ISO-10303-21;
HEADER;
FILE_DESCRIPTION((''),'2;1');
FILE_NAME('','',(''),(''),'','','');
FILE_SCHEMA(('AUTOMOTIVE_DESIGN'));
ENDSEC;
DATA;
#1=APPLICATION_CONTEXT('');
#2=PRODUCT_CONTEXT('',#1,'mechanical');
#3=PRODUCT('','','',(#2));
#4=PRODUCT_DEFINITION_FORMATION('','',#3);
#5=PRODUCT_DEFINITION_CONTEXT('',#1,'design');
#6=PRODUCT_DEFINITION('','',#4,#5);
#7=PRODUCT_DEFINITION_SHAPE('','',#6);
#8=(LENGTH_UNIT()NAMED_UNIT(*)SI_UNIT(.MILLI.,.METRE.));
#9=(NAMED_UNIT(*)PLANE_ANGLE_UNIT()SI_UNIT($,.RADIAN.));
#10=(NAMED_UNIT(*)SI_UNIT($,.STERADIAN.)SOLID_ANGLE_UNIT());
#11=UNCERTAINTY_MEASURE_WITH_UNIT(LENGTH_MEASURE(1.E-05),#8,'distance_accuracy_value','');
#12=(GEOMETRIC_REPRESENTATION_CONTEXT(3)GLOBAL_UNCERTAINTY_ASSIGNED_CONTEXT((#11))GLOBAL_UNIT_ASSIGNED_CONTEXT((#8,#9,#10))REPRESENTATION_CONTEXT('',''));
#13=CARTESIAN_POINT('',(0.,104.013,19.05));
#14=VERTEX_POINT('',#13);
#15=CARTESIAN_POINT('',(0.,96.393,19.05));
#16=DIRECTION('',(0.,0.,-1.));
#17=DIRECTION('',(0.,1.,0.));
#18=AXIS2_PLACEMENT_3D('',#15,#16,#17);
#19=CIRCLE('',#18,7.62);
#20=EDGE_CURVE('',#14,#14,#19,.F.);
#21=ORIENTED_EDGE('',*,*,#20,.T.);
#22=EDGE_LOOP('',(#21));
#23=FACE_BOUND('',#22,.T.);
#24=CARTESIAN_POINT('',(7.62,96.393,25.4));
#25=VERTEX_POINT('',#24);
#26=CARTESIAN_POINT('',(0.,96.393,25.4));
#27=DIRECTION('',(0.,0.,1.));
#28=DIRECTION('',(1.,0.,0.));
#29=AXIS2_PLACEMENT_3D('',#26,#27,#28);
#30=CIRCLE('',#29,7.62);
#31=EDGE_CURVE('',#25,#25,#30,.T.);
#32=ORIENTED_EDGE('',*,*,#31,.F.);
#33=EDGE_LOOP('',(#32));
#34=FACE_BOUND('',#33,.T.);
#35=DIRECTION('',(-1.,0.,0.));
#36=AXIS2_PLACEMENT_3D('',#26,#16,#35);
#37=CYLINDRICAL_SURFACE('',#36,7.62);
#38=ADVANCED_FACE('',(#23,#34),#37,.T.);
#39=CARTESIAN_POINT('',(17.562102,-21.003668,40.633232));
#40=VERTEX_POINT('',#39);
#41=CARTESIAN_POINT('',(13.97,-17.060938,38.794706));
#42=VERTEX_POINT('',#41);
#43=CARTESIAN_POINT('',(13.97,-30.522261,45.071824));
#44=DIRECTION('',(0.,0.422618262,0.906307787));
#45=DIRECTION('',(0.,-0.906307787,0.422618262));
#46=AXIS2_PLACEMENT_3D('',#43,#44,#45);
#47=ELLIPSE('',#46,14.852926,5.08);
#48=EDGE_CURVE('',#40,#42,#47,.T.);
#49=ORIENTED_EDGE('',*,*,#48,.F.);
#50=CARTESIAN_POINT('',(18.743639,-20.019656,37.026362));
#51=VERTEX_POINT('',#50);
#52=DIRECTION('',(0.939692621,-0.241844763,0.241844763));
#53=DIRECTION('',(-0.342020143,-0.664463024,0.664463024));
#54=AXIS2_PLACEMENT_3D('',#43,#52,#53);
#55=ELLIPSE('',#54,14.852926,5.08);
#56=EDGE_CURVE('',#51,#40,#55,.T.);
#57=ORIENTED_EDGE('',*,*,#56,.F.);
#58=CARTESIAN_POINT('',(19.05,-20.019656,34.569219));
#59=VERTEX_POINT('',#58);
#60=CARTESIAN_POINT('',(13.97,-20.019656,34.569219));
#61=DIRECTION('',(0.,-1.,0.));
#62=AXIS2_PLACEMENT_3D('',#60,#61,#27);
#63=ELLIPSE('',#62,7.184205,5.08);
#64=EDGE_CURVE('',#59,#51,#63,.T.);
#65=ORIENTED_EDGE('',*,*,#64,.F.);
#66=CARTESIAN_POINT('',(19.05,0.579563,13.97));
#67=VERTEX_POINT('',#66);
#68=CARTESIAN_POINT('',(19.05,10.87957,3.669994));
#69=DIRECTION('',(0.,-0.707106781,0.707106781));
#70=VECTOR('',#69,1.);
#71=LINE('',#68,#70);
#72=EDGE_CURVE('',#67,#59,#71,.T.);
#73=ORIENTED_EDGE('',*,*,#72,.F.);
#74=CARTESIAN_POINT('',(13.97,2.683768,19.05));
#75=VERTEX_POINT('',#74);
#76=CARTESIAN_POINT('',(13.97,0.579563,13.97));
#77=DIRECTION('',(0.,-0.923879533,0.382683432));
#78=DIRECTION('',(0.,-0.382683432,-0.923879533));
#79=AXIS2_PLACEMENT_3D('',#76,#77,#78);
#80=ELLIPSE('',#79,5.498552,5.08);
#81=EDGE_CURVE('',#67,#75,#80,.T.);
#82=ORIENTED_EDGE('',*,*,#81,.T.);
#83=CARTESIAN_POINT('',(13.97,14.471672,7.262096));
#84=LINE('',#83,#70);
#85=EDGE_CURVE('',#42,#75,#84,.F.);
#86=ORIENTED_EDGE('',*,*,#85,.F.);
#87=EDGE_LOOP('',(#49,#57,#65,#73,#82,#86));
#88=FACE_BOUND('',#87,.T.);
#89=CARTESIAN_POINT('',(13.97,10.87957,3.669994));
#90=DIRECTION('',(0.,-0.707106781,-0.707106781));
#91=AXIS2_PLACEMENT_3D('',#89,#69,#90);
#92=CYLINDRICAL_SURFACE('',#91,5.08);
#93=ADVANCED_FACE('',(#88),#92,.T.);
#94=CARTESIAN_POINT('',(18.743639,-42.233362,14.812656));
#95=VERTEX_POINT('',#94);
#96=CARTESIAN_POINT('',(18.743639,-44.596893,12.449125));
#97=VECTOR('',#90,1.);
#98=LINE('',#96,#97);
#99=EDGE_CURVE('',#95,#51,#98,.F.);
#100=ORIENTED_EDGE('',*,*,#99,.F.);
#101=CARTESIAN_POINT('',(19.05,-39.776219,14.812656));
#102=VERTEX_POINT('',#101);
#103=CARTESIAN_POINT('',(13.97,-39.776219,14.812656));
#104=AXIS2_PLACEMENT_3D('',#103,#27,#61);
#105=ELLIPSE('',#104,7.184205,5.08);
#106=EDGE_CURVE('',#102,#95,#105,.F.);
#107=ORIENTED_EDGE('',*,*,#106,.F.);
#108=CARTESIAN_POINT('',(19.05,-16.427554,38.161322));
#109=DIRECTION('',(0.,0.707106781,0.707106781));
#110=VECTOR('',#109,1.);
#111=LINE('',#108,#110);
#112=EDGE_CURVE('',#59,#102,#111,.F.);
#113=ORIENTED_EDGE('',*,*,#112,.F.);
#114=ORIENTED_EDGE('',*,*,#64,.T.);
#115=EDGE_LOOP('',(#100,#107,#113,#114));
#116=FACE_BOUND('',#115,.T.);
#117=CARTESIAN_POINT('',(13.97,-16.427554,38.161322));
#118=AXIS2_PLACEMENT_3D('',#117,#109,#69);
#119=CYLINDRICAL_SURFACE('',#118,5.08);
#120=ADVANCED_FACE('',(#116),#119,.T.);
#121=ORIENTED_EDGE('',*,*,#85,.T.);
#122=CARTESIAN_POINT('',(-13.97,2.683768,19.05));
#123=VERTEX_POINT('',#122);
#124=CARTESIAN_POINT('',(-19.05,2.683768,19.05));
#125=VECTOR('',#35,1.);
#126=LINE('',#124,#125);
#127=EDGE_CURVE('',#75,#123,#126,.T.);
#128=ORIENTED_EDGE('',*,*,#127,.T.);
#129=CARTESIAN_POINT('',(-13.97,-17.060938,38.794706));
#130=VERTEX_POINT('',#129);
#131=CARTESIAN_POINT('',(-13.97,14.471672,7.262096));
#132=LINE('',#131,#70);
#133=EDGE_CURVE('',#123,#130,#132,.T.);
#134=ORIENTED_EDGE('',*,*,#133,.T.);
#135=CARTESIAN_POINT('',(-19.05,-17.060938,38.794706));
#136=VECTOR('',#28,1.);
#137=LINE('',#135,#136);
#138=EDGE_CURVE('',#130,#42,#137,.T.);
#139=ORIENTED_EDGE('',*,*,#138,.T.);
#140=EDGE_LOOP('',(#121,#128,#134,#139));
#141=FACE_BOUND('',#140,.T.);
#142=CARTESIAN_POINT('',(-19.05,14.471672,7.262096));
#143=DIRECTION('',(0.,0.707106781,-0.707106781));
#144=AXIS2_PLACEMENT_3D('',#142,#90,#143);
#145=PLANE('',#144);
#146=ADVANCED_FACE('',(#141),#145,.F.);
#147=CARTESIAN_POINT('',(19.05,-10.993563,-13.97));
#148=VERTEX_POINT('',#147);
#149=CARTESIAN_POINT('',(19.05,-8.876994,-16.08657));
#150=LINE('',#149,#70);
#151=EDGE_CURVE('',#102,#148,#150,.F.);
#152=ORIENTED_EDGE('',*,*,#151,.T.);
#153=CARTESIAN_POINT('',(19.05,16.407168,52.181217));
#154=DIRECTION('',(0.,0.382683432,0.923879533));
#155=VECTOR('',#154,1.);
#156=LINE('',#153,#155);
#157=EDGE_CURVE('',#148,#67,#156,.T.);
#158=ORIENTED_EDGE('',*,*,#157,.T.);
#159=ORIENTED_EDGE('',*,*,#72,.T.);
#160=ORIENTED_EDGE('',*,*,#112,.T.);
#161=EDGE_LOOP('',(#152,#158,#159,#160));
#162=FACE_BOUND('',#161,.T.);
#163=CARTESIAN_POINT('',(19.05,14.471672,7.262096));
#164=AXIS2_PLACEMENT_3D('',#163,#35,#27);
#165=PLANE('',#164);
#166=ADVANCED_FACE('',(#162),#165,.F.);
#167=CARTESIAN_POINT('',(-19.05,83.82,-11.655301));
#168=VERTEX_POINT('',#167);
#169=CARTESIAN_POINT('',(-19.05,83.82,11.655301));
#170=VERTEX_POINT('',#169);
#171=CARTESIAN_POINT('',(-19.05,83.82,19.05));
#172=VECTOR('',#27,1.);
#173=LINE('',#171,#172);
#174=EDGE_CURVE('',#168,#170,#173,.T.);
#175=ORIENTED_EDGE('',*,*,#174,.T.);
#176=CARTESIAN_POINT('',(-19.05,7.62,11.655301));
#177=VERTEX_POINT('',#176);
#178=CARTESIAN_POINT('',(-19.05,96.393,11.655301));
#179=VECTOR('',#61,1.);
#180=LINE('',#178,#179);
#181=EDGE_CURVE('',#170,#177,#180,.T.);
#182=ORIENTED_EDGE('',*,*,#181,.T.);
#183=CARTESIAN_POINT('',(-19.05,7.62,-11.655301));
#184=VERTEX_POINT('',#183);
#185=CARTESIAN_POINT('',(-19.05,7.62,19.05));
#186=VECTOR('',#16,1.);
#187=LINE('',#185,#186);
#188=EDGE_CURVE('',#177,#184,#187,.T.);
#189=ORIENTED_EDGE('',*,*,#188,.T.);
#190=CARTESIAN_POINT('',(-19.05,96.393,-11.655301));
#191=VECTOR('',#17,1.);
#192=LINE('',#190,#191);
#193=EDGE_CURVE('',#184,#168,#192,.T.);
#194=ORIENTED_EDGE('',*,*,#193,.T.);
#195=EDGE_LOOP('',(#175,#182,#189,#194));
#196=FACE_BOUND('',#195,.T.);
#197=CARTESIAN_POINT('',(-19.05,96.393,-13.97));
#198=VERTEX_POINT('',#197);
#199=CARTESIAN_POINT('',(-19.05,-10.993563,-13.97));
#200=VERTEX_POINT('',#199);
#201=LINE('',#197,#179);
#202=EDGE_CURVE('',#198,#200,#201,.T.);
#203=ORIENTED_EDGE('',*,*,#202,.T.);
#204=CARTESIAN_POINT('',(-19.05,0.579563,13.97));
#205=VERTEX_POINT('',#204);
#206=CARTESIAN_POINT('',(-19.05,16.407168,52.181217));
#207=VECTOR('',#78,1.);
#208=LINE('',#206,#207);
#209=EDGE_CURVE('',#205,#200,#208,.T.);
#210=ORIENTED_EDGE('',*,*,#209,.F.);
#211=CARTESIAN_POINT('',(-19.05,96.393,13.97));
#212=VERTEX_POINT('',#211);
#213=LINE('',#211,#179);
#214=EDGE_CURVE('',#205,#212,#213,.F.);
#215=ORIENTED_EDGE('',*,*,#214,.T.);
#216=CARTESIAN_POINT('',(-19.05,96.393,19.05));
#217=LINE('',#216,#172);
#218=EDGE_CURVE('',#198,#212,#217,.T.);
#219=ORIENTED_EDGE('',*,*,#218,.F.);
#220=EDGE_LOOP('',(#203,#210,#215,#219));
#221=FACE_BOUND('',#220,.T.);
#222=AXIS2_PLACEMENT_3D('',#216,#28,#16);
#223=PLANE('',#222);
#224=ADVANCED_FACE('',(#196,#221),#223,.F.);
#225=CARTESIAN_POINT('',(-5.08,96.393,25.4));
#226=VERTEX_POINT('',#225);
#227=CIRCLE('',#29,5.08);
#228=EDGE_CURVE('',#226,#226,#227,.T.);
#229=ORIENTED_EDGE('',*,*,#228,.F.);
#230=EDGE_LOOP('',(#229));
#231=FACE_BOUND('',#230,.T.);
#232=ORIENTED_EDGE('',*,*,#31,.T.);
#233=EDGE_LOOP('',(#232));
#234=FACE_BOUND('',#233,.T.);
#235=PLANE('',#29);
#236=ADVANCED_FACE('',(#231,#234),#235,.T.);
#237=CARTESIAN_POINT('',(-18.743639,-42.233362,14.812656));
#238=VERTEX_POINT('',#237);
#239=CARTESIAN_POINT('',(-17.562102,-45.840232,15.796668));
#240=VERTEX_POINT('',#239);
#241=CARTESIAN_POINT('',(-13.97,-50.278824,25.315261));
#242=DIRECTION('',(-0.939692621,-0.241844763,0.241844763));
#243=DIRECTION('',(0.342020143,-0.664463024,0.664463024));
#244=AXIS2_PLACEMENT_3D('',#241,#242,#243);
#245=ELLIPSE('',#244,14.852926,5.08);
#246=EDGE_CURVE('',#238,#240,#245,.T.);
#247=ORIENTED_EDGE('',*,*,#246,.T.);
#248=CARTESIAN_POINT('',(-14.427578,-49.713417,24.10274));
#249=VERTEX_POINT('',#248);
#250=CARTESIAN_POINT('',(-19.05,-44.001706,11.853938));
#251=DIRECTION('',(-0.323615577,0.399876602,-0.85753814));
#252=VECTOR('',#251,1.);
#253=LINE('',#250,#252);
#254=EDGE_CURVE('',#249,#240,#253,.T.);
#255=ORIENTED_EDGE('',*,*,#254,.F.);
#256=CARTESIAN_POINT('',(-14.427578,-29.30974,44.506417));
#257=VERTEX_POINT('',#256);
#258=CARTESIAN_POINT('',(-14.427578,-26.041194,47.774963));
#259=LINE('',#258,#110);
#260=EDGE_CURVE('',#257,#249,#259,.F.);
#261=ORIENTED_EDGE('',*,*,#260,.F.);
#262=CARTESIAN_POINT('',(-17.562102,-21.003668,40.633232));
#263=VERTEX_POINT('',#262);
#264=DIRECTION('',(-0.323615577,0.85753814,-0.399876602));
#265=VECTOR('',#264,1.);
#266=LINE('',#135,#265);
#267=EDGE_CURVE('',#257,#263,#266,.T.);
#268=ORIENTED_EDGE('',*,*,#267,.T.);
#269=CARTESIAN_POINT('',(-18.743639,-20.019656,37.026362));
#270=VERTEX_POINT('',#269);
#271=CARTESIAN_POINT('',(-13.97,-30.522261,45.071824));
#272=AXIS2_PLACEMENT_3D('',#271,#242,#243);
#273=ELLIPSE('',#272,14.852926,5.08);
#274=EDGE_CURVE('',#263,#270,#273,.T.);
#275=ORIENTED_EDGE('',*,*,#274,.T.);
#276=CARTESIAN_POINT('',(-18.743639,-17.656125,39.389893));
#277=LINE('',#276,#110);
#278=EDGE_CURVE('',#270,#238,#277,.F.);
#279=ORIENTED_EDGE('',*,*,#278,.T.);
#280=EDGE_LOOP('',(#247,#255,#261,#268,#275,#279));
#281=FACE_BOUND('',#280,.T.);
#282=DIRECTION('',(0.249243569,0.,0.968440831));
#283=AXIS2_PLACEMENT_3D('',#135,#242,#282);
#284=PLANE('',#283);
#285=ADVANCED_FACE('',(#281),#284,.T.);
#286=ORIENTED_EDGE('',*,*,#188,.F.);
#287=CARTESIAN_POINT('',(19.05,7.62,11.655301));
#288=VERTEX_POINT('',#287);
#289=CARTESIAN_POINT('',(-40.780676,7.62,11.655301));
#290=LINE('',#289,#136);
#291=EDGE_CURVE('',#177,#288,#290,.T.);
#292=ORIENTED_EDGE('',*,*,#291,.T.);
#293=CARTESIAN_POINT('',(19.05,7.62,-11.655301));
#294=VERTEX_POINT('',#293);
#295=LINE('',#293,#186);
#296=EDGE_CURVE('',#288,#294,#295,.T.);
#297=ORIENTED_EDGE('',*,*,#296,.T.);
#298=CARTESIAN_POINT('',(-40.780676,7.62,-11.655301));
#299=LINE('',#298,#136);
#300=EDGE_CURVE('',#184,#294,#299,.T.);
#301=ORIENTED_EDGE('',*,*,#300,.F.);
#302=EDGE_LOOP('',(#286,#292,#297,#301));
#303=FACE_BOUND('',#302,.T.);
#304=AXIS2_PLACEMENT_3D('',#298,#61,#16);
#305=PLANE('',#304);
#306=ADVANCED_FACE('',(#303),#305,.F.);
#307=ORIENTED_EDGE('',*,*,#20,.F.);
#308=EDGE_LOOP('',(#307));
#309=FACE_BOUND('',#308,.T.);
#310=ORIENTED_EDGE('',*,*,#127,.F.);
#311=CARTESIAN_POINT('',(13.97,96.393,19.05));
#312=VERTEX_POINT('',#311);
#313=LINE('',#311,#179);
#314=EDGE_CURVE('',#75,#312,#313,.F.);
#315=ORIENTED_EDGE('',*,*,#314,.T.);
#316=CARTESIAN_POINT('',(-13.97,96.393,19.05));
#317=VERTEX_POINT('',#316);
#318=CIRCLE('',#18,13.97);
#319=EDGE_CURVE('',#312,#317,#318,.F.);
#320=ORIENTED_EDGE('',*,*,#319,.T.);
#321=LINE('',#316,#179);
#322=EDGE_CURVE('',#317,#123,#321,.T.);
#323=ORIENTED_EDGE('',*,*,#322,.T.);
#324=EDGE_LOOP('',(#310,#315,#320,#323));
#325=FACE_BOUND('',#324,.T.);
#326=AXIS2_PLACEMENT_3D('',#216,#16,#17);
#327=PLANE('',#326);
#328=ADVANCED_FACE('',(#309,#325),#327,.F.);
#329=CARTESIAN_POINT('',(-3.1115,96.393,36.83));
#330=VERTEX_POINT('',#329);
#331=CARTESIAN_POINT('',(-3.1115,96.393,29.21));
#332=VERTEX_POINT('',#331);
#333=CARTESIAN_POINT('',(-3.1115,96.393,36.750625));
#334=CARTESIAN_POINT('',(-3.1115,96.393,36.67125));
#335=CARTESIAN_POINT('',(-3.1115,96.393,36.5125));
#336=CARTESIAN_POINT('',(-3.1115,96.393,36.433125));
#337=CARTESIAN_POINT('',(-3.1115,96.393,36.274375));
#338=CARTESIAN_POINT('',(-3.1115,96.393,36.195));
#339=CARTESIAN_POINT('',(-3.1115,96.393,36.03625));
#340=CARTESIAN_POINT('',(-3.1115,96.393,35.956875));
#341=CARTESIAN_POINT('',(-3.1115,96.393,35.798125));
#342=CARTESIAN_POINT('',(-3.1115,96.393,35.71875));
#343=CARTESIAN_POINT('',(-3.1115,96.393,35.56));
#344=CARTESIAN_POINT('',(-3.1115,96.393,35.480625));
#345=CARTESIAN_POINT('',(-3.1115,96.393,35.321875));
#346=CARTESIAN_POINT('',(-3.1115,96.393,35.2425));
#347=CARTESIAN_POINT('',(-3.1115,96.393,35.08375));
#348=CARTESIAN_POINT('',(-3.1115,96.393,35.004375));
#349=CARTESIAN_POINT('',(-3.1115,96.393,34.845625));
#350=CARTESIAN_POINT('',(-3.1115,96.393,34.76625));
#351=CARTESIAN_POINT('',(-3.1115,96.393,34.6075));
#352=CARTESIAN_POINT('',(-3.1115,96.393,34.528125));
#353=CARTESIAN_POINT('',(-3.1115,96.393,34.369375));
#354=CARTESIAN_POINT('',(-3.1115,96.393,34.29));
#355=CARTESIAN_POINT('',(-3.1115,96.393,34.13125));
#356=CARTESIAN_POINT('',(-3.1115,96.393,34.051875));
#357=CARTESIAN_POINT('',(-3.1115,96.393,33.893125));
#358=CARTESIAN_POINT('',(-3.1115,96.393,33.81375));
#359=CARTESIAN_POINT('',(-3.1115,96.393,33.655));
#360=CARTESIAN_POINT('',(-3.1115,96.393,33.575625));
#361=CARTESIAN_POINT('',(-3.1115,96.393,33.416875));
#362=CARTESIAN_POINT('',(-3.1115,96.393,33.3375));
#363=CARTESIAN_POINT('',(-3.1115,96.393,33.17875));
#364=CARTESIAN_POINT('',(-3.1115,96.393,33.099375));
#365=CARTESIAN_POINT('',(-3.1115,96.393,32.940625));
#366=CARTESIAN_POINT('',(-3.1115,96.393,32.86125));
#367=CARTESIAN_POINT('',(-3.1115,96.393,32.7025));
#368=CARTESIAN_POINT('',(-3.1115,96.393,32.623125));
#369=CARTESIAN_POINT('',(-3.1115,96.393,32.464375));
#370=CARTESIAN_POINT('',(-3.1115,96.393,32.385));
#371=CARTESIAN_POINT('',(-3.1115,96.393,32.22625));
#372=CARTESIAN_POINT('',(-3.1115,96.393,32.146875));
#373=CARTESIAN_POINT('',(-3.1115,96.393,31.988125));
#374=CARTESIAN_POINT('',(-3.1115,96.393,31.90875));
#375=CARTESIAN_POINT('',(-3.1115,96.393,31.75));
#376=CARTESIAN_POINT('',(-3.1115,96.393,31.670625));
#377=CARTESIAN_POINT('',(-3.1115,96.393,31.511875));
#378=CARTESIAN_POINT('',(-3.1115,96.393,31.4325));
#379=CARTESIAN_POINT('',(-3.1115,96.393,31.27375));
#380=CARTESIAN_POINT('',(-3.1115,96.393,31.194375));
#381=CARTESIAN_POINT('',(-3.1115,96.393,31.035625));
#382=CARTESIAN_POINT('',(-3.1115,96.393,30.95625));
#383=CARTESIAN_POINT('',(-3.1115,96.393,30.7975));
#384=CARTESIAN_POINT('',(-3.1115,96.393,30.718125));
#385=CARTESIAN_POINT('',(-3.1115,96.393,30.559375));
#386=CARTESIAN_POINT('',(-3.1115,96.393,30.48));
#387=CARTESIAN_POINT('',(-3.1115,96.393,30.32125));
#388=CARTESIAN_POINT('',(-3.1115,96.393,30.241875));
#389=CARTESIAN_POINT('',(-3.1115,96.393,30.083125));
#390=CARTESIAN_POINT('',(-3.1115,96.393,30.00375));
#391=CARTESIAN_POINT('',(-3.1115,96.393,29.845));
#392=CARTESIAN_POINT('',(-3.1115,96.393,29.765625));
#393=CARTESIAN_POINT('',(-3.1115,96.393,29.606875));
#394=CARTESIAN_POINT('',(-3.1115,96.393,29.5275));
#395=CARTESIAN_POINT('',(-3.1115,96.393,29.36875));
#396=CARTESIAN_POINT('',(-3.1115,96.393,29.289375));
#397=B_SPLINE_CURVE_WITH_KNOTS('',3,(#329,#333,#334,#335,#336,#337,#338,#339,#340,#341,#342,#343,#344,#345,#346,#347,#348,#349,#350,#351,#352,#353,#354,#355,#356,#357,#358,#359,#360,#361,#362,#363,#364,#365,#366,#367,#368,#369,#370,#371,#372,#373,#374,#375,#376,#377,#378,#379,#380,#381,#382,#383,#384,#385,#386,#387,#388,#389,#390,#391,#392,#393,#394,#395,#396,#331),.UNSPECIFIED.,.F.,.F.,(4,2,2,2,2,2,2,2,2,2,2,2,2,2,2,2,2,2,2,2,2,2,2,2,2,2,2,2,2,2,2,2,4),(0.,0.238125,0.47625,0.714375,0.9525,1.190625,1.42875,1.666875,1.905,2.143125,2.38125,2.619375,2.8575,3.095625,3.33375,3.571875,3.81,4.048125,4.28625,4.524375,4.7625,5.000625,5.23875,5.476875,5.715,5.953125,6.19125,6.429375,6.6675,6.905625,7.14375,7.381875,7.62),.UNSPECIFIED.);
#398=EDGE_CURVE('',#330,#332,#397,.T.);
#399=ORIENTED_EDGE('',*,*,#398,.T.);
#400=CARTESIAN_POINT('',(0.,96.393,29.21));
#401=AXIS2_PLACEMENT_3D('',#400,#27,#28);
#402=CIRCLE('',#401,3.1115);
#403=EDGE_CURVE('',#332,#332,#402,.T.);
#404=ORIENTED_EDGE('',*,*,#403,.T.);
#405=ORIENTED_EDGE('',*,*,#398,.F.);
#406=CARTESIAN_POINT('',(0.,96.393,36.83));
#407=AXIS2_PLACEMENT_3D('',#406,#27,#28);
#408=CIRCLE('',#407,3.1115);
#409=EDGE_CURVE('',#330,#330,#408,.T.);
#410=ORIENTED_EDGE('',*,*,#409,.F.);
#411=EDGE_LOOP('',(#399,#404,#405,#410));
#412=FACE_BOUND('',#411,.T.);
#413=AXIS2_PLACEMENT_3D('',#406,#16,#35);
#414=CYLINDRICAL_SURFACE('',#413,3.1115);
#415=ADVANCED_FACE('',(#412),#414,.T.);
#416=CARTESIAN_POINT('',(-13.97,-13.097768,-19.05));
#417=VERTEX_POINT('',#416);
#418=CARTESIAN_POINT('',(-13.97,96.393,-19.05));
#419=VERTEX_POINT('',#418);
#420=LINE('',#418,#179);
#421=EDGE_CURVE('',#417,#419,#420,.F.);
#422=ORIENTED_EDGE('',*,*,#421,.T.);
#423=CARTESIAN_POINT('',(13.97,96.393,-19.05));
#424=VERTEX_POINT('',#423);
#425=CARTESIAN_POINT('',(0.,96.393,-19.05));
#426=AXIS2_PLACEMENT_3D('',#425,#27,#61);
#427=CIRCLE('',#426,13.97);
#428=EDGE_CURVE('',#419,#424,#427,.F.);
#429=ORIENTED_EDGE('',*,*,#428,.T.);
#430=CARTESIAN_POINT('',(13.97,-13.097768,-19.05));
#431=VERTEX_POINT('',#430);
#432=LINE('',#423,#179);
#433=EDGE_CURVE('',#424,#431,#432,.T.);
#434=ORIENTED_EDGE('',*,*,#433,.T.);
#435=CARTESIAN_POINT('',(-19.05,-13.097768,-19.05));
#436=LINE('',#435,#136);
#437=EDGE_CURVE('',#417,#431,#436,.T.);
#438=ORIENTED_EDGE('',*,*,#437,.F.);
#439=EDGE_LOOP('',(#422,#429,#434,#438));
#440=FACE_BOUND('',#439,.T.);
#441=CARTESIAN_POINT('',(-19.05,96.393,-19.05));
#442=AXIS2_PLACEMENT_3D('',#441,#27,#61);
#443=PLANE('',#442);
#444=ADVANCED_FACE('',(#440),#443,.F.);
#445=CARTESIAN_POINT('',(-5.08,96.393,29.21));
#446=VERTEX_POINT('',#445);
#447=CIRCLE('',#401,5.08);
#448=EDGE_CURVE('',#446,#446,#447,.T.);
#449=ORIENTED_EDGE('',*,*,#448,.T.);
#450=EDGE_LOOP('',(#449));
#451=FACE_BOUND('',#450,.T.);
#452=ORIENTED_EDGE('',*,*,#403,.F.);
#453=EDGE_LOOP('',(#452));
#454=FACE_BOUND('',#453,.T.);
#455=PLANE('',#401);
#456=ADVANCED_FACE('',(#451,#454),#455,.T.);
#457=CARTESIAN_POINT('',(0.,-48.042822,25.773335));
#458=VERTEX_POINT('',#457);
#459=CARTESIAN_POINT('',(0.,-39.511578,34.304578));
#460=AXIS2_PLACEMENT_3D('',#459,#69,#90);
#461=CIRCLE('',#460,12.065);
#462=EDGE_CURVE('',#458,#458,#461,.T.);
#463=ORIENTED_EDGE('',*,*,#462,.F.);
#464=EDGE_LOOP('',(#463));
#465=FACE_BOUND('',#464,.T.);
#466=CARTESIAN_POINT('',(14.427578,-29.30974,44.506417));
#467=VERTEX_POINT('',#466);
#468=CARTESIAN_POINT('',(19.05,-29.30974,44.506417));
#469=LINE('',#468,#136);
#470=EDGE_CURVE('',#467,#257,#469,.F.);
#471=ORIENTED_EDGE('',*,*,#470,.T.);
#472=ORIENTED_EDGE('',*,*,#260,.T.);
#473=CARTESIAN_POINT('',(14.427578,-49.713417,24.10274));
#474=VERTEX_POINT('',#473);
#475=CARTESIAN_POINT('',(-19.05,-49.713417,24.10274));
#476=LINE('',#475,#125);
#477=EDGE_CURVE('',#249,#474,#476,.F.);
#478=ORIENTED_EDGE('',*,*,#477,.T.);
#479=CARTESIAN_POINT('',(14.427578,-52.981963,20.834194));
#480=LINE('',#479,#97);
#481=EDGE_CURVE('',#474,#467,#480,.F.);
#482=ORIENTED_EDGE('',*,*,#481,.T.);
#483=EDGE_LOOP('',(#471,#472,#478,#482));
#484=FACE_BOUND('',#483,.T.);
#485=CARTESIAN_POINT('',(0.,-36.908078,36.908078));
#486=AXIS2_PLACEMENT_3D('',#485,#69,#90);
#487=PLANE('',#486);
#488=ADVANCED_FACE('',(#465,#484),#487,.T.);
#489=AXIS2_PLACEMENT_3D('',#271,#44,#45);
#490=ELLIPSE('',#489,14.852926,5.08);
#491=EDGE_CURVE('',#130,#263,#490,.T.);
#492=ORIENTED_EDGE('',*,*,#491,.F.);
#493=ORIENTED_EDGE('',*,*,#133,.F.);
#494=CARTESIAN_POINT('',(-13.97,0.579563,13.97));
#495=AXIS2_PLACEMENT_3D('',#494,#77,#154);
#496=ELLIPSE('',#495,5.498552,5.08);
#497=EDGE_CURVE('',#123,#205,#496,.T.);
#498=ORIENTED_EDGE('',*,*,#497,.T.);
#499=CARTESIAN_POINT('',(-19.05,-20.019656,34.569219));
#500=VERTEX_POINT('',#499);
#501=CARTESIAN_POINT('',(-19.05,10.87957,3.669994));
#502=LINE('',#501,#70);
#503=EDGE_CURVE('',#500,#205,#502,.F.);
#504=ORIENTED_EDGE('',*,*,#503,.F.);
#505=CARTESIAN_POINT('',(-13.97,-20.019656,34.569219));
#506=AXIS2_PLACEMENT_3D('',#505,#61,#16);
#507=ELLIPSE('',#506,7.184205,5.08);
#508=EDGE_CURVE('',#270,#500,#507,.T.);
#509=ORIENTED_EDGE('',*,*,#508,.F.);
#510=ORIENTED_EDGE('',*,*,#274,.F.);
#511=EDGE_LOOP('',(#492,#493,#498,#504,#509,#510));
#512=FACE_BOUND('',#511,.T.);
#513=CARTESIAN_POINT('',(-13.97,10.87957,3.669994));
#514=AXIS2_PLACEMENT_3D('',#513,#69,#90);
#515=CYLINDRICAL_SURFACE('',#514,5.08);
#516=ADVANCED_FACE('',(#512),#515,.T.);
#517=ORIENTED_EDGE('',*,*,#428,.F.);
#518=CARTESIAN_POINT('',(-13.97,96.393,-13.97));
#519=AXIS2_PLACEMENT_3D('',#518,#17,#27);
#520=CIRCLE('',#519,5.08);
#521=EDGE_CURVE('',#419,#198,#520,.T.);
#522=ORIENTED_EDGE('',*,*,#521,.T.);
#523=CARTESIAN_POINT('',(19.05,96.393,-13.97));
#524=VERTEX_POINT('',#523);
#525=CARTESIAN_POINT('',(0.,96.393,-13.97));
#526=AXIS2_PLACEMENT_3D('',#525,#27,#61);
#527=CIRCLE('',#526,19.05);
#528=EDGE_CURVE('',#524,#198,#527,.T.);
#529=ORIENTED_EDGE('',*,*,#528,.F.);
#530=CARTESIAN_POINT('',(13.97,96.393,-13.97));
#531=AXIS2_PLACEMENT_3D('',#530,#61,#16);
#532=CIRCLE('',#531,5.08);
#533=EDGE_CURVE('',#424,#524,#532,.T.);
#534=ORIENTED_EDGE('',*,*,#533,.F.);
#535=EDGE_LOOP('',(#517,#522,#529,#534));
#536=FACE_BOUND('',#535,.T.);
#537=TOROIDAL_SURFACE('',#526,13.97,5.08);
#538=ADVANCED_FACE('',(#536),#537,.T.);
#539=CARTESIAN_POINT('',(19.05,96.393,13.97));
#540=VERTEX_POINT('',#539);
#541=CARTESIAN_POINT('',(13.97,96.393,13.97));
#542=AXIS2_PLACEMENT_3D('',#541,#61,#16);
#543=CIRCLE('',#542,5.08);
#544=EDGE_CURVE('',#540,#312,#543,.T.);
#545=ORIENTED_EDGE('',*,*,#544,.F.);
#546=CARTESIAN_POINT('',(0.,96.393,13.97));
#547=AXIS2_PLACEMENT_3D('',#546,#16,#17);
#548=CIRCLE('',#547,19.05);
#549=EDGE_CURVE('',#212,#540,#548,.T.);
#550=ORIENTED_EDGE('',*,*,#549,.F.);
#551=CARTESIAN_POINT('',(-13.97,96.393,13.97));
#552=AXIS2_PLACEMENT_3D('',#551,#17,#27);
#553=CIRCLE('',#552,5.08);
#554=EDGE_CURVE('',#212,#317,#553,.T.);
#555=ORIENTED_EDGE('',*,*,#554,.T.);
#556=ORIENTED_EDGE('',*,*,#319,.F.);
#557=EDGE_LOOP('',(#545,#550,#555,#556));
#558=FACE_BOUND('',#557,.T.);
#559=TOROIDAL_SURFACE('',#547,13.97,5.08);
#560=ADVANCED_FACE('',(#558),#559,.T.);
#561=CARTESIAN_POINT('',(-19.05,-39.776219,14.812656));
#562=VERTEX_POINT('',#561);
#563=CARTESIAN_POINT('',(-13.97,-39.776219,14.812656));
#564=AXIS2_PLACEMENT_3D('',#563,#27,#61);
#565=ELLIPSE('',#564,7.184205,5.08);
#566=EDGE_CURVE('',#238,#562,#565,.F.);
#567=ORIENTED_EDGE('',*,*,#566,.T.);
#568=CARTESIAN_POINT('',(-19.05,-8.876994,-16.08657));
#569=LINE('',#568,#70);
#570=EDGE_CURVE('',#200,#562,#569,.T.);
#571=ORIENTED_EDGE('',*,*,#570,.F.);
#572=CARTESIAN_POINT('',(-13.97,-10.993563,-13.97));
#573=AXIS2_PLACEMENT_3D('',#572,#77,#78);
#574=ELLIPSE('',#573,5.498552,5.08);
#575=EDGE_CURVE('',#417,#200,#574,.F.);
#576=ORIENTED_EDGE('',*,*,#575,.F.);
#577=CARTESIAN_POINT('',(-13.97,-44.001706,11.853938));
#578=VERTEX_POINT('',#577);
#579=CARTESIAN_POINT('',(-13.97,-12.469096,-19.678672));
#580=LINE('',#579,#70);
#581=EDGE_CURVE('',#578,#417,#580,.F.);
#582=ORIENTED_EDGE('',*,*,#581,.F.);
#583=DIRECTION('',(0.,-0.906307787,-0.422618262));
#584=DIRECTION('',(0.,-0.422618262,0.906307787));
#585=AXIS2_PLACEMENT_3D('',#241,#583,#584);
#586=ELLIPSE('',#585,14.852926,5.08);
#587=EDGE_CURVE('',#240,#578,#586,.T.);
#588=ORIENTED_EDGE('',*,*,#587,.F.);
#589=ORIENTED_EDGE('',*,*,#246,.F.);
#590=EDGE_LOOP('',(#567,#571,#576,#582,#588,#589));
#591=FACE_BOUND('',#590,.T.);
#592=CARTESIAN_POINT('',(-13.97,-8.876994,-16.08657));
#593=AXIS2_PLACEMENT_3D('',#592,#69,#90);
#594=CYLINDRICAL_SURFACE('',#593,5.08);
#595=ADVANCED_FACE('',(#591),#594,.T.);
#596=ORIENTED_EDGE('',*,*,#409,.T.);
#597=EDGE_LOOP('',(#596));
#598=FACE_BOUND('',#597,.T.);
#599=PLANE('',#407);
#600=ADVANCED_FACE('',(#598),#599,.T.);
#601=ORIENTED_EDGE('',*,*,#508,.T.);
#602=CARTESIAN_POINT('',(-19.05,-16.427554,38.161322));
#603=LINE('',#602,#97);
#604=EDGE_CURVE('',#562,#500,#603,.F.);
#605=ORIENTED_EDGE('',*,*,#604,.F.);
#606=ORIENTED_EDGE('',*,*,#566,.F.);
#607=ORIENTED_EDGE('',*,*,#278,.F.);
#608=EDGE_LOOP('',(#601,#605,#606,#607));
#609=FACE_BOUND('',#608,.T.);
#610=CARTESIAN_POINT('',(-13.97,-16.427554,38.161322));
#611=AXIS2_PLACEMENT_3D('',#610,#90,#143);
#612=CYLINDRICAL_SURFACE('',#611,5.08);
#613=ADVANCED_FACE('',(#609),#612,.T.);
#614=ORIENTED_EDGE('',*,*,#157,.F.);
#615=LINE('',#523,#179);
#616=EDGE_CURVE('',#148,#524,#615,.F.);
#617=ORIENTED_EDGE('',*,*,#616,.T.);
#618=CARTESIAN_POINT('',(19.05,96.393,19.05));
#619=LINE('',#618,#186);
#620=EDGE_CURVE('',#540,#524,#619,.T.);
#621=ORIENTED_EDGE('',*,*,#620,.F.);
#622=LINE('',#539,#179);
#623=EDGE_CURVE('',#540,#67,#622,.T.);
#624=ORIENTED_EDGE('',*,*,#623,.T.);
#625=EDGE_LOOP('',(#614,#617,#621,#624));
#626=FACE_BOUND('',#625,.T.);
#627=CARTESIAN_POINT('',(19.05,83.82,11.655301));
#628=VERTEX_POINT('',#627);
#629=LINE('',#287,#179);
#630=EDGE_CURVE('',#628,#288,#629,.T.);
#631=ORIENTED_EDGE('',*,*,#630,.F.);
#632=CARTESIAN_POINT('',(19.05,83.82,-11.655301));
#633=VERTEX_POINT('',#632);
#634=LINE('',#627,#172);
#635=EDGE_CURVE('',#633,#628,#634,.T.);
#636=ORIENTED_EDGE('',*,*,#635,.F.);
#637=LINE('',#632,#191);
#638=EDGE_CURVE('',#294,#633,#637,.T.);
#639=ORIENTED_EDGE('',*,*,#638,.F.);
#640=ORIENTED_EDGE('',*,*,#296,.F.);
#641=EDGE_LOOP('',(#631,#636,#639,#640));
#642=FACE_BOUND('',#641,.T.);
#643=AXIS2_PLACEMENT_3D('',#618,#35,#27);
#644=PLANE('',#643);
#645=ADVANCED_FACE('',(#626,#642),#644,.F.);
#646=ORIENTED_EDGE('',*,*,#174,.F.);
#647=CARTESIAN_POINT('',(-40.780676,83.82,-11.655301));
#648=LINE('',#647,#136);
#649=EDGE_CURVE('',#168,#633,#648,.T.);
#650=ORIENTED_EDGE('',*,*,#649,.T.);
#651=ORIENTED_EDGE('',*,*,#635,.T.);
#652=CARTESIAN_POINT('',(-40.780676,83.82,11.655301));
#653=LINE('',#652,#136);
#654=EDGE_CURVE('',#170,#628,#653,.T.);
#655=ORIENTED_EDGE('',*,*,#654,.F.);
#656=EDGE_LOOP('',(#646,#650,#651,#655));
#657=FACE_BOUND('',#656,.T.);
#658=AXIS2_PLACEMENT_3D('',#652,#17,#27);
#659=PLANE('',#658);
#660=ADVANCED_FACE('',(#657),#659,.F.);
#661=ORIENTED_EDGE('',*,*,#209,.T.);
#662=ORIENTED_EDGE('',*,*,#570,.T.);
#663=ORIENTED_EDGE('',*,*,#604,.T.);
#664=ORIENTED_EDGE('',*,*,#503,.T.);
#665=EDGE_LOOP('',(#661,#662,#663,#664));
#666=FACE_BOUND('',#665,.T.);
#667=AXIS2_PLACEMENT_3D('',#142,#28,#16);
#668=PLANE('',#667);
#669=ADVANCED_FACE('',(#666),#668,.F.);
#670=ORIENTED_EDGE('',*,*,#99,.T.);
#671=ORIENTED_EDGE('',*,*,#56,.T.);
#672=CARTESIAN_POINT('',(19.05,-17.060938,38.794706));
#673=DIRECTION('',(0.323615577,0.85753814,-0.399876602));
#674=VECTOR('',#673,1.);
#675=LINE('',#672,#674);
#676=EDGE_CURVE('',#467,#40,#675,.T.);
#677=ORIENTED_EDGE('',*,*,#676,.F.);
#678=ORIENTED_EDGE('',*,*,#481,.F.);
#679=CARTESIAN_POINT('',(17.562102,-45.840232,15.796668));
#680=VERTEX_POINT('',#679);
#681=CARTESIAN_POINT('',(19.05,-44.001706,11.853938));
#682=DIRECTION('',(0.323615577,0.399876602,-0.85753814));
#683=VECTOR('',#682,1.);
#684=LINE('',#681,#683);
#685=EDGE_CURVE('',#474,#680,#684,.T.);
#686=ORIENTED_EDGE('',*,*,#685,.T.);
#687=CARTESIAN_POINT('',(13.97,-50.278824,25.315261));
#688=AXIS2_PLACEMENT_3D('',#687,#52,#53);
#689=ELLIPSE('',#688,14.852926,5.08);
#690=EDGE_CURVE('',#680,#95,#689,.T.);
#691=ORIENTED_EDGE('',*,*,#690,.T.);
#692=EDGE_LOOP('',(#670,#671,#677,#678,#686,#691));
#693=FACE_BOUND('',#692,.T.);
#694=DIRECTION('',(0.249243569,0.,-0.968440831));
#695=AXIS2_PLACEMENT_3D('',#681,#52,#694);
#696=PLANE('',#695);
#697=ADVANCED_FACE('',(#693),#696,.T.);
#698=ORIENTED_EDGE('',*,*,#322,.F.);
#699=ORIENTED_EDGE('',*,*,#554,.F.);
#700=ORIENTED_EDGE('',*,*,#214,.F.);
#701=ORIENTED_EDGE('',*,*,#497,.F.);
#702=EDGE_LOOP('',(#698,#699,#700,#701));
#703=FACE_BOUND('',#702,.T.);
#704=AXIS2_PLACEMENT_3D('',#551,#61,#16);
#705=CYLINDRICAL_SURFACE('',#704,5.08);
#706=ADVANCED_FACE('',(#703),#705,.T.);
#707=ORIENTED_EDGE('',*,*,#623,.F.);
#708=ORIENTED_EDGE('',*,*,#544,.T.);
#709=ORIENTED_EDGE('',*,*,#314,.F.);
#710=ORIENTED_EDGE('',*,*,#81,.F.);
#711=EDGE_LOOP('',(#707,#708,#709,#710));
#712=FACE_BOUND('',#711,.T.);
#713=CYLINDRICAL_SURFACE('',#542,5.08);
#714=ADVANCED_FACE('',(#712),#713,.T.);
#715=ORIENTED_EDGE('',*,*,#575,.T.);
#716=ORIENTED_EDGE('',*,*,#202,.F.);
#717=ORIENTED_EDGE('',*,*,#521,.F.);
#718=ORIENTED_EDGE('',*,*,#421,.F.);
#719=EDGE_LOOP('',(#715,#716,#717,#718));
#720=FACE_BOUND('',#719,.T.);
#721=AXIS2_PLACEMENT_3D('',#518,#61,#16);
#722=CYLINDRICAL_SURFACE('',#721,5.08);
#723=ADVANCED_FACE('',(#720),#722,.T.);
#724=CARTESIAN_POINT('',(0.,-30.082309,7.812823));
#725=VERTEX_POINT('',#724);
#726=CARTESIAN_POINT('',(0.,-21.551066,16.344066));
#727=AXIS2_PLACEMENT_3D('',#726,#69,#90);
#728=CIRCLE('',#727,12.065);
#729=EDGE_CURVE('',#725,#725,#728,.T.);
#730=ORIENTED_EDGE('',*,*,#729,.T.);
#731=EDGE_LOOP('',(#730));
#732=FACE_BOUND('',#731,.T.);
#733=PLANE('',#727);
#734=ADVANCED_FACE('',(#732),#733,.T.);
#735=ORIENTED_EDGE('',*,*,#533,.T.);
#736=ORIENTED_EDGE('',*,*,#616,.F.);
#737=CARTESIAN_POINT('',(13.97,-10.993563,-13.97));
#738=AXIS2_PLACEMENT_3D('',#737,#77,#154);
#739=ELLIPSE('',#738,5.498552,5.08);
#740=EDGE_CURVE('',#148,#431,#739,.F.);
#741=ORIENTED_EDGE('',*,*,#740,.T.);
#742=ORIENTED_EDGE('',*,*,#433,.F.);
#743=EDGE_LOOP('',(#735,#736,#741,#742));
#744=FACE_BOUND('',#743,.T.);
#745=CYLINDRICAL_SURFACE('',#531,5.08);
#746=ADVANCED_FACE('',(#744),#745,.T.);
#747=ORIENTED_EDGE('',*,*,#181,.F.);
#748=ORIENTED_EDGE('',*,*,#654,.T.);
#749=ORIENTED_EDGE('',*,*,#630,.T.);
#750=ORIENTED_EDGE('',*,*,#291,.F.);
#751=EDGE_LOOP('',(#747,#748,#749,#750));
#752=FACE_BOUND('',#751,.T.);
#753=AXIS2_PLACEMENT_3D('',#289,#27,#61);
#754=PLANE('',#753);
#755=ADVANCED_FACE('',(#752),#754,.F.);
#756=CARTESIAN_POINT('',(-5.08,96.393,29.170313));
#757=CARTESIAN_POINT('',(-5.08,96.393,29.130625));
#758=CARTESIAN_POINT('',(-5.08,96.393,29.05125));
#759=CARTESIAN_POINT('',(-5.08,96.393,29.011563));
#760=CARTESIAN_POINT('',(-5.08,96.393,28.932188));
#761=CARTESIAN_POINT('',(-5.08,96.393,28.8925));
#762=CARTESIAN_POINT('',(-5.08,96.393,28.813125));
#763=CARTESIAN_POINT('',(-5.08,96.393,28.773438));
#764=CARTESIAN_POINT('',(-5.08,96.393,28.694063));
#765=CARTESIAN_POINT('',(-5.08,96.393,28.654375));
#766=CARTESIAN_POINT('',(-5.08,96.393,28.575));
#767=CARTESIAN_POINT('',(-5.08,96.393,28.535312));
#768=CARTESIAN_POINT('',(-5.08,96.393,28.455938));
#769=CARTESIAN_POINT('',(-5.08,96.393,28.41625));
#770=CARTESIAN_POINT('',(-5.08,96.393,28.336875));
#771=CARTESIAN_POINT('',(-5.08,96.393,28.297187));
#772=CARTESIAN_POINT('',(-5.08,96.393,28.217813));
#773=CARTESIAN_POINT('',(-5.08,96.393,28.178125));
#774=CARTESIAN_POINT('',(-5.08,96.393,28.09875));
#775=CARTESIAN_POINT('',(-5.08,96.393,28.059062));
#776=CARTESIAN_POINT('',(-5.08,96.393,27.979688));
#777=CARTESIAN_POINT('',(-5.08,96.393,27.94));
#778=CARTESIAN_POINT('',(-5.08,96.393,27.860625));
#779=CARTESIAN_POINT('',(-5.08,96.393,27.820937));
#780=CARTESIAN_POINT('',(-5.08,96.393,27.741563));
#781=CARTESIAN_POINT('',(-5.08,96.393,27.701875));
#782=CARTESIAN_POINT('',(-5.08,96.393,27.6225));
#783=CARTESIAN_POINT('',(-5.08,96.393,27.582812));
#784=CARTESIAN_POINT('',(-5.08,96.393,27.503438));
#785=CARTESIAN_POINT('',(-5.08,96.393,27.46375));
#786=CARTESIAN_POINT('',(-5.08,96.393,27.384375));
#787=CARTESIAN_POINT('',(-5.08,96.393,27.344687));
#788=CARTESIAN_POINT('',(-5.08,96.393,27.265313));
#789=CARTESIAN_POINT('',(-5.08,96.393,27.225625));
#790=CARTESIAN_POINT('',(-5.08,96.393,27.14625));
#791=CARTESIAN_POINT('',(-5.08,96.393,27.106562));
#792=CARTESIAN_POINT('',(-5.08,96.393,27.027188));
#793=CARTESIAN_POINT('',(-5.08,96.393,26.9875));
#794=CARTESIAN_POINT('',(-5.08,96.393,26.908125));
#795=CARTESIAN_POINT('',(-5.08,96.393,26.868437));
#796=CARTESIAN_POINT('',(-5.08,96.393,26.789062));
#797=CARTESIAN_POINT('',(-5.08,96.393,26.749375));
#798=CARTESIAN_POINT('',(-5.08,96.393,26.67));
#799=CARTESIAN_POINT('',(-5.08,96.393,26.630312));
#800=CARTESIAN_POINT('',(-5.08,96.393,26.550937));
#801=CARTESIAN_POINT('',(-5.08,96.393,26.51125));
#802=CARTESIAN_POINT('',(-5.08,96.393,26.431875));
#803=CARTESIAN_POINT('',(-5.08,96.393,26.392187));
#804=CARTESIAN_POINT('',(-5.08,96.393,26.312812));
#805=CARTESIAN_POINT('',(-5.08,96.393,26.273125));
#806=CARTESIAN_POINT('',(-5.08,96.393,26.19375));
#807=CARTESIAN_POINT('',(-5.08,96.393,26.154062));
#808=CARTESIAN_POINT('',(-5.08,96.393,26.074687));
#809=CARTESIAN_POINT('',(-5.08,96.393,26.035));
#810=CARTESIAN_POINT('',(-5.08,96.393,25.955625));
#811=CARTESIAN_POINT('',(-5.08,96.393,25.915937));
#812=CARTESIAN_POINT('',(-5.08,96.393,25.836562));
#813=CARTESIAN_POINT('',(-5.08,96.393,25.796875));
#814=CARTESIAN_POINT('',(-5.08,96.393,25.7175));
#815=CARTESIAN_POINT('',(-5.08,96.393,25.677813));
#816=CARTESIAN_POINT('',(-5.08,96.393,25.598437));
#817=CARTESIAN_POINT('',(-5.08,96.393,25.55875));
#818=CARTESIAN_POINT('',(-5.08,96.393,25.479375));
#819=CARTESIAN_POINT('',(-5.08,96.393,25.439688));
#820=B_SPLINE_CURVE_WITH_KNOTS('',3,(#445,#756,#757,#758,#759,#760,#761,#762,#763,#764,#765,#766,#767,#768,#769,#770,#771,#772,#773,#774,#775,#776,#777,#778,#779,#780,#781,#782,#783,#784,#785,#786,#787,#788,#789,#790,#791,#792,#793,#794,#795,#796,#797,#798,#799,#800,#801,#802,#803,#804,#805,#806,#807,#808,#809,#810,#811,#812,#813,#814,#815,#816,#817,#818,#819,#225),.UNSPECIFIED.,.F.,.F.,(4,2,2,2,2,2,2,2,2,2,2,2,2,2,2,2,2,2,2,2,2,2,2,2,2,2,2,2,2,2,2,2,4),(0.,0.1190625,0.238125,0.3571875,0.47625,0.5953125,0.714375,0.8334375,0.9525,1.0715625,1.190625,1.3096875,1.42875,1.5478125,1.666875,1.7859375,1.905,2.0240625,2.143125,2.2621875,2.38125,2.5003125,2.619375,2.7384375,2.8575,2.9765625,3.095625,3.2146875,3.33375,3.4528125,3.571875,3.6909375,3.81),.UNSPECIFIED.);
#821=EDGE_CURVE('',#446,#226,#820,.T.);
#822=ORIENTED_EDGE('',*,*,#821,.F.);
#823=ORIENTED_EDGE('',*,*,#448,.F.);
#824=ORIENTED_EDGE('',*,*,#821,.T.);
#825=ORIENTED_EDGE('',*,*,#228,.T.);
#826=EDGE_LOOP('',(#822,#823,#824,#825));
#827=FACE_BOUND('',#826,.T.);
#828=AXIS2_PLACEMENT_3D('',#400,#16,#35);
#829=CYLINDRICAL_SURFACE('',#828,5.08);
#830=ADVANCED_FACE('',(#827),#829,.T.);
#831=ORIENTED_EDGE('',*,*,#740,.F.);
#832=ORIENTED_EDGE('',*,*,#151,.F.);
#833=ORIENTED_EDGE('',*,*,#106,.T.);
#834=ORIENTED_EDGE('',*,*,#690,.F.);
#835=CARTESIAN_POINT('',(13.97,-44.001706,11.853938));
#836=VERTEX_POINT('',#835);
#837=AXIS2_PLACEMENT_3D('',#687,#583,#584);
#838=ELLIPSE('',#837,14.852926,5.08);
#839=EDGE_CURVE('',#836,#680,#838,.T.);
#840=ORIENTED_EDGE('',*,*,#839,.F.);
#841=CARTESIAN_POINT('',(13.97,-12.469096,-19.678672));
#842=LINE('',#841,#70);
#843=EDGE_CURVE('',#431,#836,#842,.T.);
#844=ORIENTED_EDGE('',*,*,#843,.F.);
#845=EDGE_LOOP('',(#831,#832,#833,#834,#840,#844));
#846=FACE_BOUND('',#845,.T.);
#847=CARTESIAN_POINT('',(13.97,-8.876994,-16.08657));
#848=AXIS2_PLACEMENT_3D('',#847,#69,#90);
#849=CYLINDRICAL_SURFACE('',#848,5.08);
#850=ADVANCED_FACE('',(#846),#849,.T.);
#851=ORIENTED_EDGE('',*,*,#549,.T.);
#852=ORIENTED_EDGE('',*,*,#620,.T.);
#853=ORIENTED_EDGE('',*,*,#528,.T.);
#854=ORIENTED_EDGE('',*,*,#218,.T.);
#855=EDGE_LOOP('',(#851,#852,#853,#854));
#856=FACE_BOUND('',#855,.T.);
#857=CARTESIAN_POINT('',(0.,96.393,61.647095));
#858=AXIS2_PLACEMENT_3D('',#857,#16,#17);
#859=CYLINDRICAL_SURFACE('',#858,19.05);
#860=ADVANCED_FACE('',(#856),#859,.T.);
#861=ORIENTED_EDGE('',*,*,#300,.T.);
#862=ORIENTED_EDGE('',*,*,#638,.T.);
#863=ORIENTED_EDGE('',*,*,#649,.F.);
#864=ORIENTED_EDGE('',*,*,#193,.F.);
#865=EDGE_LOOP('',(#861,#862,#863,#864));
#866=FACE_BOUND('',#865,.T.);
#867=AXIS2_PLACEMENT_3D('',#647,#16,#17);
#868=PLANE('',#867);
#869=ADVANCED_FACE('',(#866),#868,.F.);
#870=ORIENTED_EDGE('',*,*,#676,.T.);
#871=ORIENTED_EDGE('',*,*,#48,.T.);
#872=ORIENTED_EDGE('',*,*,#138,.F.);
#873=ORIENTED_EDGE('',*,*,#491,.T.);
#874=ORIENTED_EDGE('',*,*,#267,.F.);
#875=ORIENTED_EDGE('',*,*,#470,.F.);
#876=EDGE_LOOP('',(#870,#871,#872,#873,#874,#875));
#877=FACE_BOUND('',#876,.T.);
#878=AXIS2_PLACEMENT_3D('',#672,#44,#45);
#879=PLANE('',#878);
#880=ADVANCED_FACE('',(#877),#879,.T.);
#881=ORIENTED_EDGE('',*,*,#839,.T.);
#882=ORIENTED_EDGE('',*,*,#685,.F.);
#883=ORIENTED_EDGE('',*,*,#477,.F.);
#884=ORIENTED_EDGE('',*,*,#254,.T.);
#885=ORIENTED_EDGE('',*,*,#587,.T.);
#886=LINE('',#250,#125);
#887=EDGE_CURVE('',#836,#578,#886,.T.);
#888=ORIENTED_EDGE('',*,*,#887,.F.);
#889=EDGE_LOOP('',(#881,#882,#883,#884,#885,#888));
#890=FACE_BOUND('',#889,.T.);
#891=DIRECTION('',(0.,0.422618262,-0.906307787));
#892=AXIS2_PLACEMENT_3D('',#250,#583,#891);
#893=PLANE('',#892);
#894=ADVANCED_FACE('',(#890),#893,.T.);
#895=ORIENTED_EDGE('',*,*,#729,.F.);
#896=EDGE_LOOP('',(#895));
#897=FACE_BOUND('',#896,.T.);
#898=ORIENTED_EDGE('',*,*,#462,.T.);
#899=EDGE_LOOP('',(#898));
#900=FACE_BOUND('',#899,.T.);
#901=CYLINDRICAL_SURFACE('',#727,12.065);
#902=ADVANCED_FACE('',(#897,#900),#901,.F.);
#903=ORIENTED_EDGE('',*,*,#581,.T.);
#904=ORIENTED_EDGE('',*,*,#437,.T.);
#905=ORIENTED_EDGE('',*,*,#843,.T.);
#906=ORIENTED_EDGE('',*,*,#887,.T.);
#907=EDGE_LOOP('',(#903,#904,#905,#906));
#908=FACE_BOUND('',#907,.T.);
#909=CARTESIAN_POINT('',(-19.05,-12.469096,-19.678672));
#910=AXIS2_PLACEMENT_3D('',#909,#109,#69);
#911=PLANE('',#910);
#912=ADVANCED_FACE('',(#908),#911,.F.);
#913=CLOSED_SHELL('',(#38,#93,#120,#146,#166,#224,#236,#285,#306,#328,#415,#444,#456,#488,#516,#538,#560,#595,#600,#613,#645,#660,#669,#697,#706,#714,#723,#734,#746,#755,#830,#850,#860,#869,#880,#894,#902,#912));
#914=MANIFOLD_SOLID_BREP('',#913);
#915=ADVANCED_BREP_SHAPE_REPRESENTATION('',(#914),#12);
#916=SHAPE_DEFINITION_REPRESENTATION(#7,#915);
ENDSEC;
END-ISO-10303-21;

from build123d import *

# Parameters (mm, degrees)
SKETCH11_W          = 38.1
SKETCH11_H          = 38.1
SKETCH12_W          = 38.1
SKETCH12_H          = 38.1
BOSS_EXTRUDE5_DEPTH = 12.7
BOSS_EXTRUDE5_TAPER = 20
BOSS_EXTRUDE6_DEPTH = 38.1
SKETCH15_R          = 12.065
CUT_EXTRUDE3_DEPTH  = 25.4
SKETCH16_W          = 23.310601064
SKETCH16_H          = 76.2
CUT_EXTRUDE4_DEPTH  = 59.830675793
SKETCH17_R          = 7.62
BOSS_EXTRUDE7_DEPTH = 6.35
SKETCH18_R          = 5.08
BOSS_EXTRUDE8_DEPTH = 3.81
SKETCH19_R          = 3.1115
BOSS_EXTRUDE9_DEPTH = 7.62
FILLET2_R           = 5.08


with BuildPart() as part:
    # Sweep1: sweep along a path in Sketch10
    with BuildLine(Plane(origin=(0, 0, 0), x_dir=(0, 0, -1), z_dir=(1, 0, 0))) as sweep1_path:
        Line((0, 96.393), (0, -5.207))
        Line((0, -5.207), (-25.324322261, -30.531322261))
    # Sketch11 → Sweep1 (sweep)
    with BuildSketch(Plane(origin=(0, 96.393, 0), x_dir=(1, 0, 0), z_dir=(0, 1, 0))):
        Rectangle(SKETCH11_W, SKETCH11_H)
    sweep(path=sweep1_path.line, transition=Transition.RIGHT)

    # Sketch12 → Boss-Extrude5 (add)
    with BuildSketch(Plane(origin=(0, -27.927822261, 27.927822261), x_dir=(1, 0, 0), z_dir=(0, -0.7071067811865461, 0.7071067811865489))):
        with Locations((0, -3.68190501)):
            Rectangle(SKETCH12_W, SKETCH12_H)
    extrude(amount=BOSS_EXTRUDE5_DEPTH, taper=BOSS_EXTRUDE5_TAPER)

    # Sketch13 → Boss-Extrude6 (add)
    with BuildSketch(Plane(origin=(0, 0, -19.05), x_dir=(-1, 0, 0), z_dir=(0, 0, -1))):
        with BuildLine():
            Line((-19.05, 96.393), (19.05, 96.393))
            ThreePointArc((19.05, 96.393), (0, 115.443), (-19.05, 96.393))
        make_face()
    extrude(amount=-BOSS_EXTRUDE6_DEPTH)

    # Sketch15 → Cut-Extrude3 (cut)
    with BuildSketch(Plane(origin=(0, -36.908078382, 36.908078382), x_dir=(1, 0, 0), z_dir=(0, -0.7071067811865461, 0.7071067811865489))):
        with Locations(Location((0, -3.68190501, 0), (0, 0, 270))):
            Circle(SKETCH15_R)
    extrude(amount=-CUT_EXTRUDE3_DEPTH, mode=Mode.SUBTRACT)

    # Sketch16 → Cut-Extrude4 (cut)
    with BuildSketch(Plane(origin=(19.05, 0, 0), x_dir=(0, 0, -1), z_dir=(1, 0, 0))):
        with Locations((0, 45.72)):
            Rectangle(SKETCH16_W, SKETCH16_H)
    extrude(amount=-CUT_EXTRUDE4_DEPTH, mode=Mode.SUBTRACT)

    # Sketch17 → Boss-Extrude7 (add)
    with BuildSketch(Plane.XY.offset(19.05)):
        with Locations(Location((0, 96.393, 0), (0, 0, 90))):
            Circle(SKETCH17_R)
    extrude(amount=BOSS_EXTRUDE7_DEPTH)

    # Sketch18 → Boss-Extrude8 (add)
    with BuildSketch(Plane.XY.offset(25.4)):
        with Locations(Location((0, 96.393, 0), (0, 0, 180))):
            Circle(SKETCH18_R)
    extrude(amount=BOSS_EXTRUDE8_DEPTH)

    # Sketch19 → Boss-Extrude9 (add)
    with BuildSketch(Plane.XY.offset(29.21)):
        with Locations(Location((0, 96.393, 0), (0, 0, 180))):
            Circle(SKETCH19_R)
    extrude(amount=BOSS_EXTRUDE9_DEPTH)

    # Fillet2
    # the kernel refuses this fillet: 5.08 mm, written as the material it takes off along each edge
    with BuildSketch(Plane(origin=(19.05, 96.393, 19.05), x_dir=(-1, 0, 0), z_dir=(0, -1, 0))) as fillet2_piece_1_section:
        with BuildLine():
            CenterArc((FILLET2_R, FILLET2_R), FILLET2_R, 180, 90)
            Line((0, FILLET2_R), (0, 0))
            Line((0, 0), (FILLET2_R, 0))
        make_face()
    fillet2_piece_1 = extrude(amount=106.409231637, mode=Mode.PRIVATE)
    fillet2_piece_1 = split(fillet2_piece_1, bisect_by=Plane(origin=(17.892257619, 26.96392305, -5.230154687), z_dir=(0, 0.7071067811865489, 0.7071067811865462)), keep=Keep.TOP, mode=Mode.PRIVATE)
    add(fillet2_piece_1, mode=Mode.SUBTRACT)
    with BuildSketch(Plane(origin=(19.05, 96.393, -19.05), x_dir=(0, 0, 1), z_dir=(0, -1, 0))) as fillet2_piece_2:
        with BuildLine():
            CenterArc((FILLET2_R, FILLET2_R), FILLET2_R, 180, 90)
            Line((0, FILLET2_R), (0, 0))
            Line((0, 0), (FILLET2_R, 0))
        make_face()
    extrude(amount=122.190768363, mode=Mode.SUBTRACT)
    with BuildSketch(Plane(origin=(19.05, 11.664024484, 10.069743879), x_dir=(-1, 0, 0), z_dir=(0, -0.7071067811865462, 0.7071067811865489))) as fillet2_piece_3_section:
        with BuildLine():
            CenterArc((FILLET2_R, FILLET2_R), FILLET2_R, 180, 90)
            Line((0, FILLET2_R), (0, 0))
            Line((0, 0), (FILLET2_R, 0))
        make_face()
    fillet2_piece_3 = extrude(amount=53.323231637, mode=Mode.PRIVATE)
    fillet2_piece_3 = split(fillet2_piece_3, bisect_by=Plane(origin=(17.881962417, -12.866336341, 19.05), z_dir=(0, 0, 1)), keep=Keep.TOP, mode=Mode.PRIVATE)
    add(fillet2_piece_3, mode=Mode.SUBTRACT)
    with BuildSketch(Plane(origin=(19.05, -4.117512242, -28.030256121), x_dir=(0, 0.7071067811865489, 0.7071067811865462), z_dir=(0, -0.7071067811865462, 0.7071067811865489))) as fillet2_piece_4:
        with BuildLine():
            CenterArc((FILLET2_R, FILLET2_R), FILLET2_R, 180, 90)
            Line((0, FILLET2_R), (0, 0))
            Line((0, 0), (FILLET2_R, 0))
        make_face()
    extrude(amount=69.104768363, mode=Mode.SUBTRACT)
    with BuildSketch(Plane(origin=(-19.05, -4.117512242, -28.030256121), x_dir=(0, 0.7071067811865488, 0.7071067811865461), z_dir=(0, -0.7071067811865462, 0.7071067811865489))) as fillet2_piece_5:
        with BuildLine():
            CenterArc((FILLET2_R, -FILLET2_R), FILLET2_R, 90, 90)
            Line((0, -FILLET2_R), (0, 0))
            Line((0, 0), (FILLET2_R, 0))
        make_face()
    extrude(amount=69.104768363, mode=Mode.SUBTRACT)
    with BuildSketch(Plane(origin=(-19.05, 11.664024484, 10.069743879), x_dir=(0, -0.7071067811865489, -0.7071067811865462), z_dir=(0, -0.7071067811865462, 0.7071067811865489))) as fillet2_piece_6_section:
        with BuildLine():
            CenterArc((FILLET2_R, FILLET2_R), FILLET2_R, 180, 90)
            Line((0, FILLET2_R), (0, 0))
            Line((0, 0), (FILLET2_R, 0))
        make_face()
    fillet2_piece_6 = extrude(amount=53.323231637, mode=Mode.PRIVATE)
    fillet2_piece_6 = split(fillet2_piece_6, bisect_by=Plane(origin=(-17.881962417, -12.866336341, 19.05), z_dir=(0, 0, 1)), keep=Keep.TOP, mode=Mode.PRIVATE)
    add(fillet2_piece_6, mode=Mode.SUBTRACT)
    with BuildSketch(Plane(origin=(19.05, -15.477476632, 40.378167891), x_dir=(0, 0.7071067811865461, -0.7071067811865488), z_dir=(0, -0.7071067811865489, -0.7071067811865462)), Plane(origin=(-19.05, -45.585167891, 10.270476632), x_dir=(0, 0.7071067811865461, -0.7071067811865489), z_dir=(0, 0.7071067811865489, 0.7071067811865462))) as fillet2_piece_7:
        with BuildLine():
            CenterArc((FILLET2_R * 0.176326980708, -FILLET2_R), FILLET2_R, 90, 20)
            Line((-FILLET2_R * 0.165693162617, -FILLET2_R * 0.0603073792141), (0, 0))
            Line((0, 0), (FILLET2_R * 0.176326980708, 0))
        make_face()
    extrude(amount=42.57870531, mode=Mode.SUBTRACT)
    with BuildSketch(Plane(origin=(-19.05, 96.393, -19.05), x_dir=(0, 0, 1), z_dir=(0, -1, 0))) as fillet2_piece_8:
        with BuildLine():
            CenterArc((FILLET2_R, -FILLET2_R), FILLET2_R, 90, 90)
            Line((0, -FILLET2_R), (0, 0))
            Line((0, 0), (FILLET2_R, 0))
        make_face()
    extrude(amount=122.190768363, mode=Mode.SUBTRACT)
    with BuildSketch(Plane(origin=(-19.05, 96.393, 19.05), x_dir=(1, 0, 0), z_dir=(0, -1, 0))) as fillet2_piece_9_section:
        with BuildLine():
            CenterArc((FILLET2_R, -FILLET2_R), FILLET2_R, 90, 90)
            Line((0, -FILLET2_R), (0, 0))
            Line((0, 0), (FILLET2_R, 0))
        make_face()
    fillet2_piece_9 = extrude(amount=106.409231637, mode=Mode.PRIVATE)
    fillet2_piece_9 = split(fillet2_piece_9, bisect_by=Plane(origin=(-17.892257619, 26.96392305, -5.230154687), z_dir=(0, 0.7071067811865489, 0.7071067811865462)), keep=Keep.TOP, mode=Mode.PRIVATE)
    add(fillet2_piece_9, mode=Mode.SUBTRACT)
    with BuildSketch(Plane(origin=(0, 96.393, -19.05), x_dir=(-1, 0, 0), z_dir=(0, -1, 0))) as fillet2_piece_10:
        with BuildLine():
            CenterArc((19.05 - FILLET2_R, -FILLET2_R), FILLET2_R, 0, 90)
            Line((19.05 - FILLET2_R, 0), (19.05, 0))
            Line((19.05, 0), (19.05, -FILLET2_R))
        make_face()
    revolve(axis=Axis((0, 96.393, -19.05), (0, 0, -1)), revolution_arc=180, mode=Mode.SUBTRACT)
    with BuildSketch(Plane(origin=(0, 96.393, 19.05), x_dir=(-1, 0, 0), z_dir=(0, -1, 0))) as fillet2_piece_11:
        with BuildLine():
            CenterArc((19.05 - FILLET2_R, FILLET2_R), FILLET2_R, 270, 90)
            Line((19.05, FILLET2_R), (19.05, 0))
            Line((19.05, 0), (19.05 - FILLET2_R, 0))
        make_face()
    revolve(axis=Axis((0, 96.393, 19.05), (0, 0, -1)), revolution_arc=180, mode=Mode.SUBTRACT)
    with BuildSketch(Plane(origin=(19.05, 96.393, 19.05), x_dir=(-1, 0, 0), z_dir=(0, -1, 0))) as fillet2_piece_12a_section:
        with BuildLine():
            CenterArc((FILLET2_R, FILLET2_R), FILLET2_R, 180, 90)
            Line((0, FILLET2_R), (0, 0))
            Line((0, 0), (FILLET2_R, 0))
        make_face()
    fillet2_piece_12a = extrude(amount=106.409231637, mode=Mode.PRIVATE)
    fillet2_piece_12a = split(fillet2_piece_12a, bisect_by=Plane(origin=(17.951071981, 0.436282509, 21.297485854), z_dir=(0, -0.7071067811865489, -0.7071067811865462)), keep=Keep.TOP, mode=Mode.PRIVATE)
    with BuildSketch(Plane(origin=(19.05, 11.664024484, 10.069743879), x_dir=(-1, 0, 0), z_dir=(0, -0.7071067811865462, 0.7071067811865489))) as fillet2_piece_12b_section:
        with BuildLine():
            CenterArc((FILLET2_R, FILLET2_R), FILLET2_R, 180, 90)
            Line((0, FILLET2_R), (0, 0))
            Line((0, 0), (FILLET2_R, 0))
        make_face()
    fillet2_piece_12b = extrude(amount=53.323231637, mode=Mode.PRIVATE)
    fillet2_piece_12b = split(fillet2_piece_12b, bisect_by=Plane(origin=(17.951071981, 5.862193339, 19.05), z_dir=(0, 0, -1)), keep=Keep.TOP, mode=Mode.PRIVATE)
    fillet2_piece_12 = fillet2_piece_12a & fillet2_piece_12b
    add(fillet2_piece_12, mode=Mode.SUBTRACT)
    with BuildSketch(Plane(origin=(-19.05, 96.393, 19.05), x_dir=(1, 0, 0), z_dir=(0, -1, 0))) as fillet2_piece_13a_section:
        with BuildLine():
            CenterArc((FILLET2_R, -FILLET2_R), FILLET2_R, 90, 90)
            Line((0, -FILLET2_R), (0, 0))
            Line((0, 0), (FILLET2_R, 0))
        make_face()
    fillet2_piece_13a = extrude(amount=106.409231637, mode=Mode.PRIVATE)
    fillet2_piece_13a = split(fillet2_piece_13a, bisect_by=Plane(origin=(-17.951071981, 0.436282509, 21.297485854), z_dir=(0, -0.7071067811865489, -0.7071067811865462)), keep=Keep.TOP, mode=Mode.PRIVATE)
    with BuildSketch(Plane(origin=(-19.05, 11.664024484, 10.069743879), x_dir=(0, -0.7071067811865489, -0.7071067811865462), z_dir=(0, -0.7071067811865462, 0.7071067811865489))) as fillet2_piece_13b_section:
        with BuildLine():
            CenterArc((FILLET2_R, FILLET2_R), FILLET2_R, 180, 90)
            Line((0, FILLET2_R), (0, 0))
            Line((0, 0), (FILLET2_R, 0))
        make_face()
    fillet2_piece_13b = extrude(amount=53.323231637, mode=Mode.PRIVATE)
    fillet2_piece_13b = split(fillet2_piece_13b, bisect_by=Plane(origin=(-17.951071981, 5.862193339, 19.05), z_dir=(0, 0, -1)), keep=Keep.TOP, mode=Mode.PRIVATE)
    fillet2_piece_13 = fillet2_piece_13a & fillet2_piece_13b
    add(fillet2_piece_13, mode=Mode.SUBTRACT)


solid = part.part
